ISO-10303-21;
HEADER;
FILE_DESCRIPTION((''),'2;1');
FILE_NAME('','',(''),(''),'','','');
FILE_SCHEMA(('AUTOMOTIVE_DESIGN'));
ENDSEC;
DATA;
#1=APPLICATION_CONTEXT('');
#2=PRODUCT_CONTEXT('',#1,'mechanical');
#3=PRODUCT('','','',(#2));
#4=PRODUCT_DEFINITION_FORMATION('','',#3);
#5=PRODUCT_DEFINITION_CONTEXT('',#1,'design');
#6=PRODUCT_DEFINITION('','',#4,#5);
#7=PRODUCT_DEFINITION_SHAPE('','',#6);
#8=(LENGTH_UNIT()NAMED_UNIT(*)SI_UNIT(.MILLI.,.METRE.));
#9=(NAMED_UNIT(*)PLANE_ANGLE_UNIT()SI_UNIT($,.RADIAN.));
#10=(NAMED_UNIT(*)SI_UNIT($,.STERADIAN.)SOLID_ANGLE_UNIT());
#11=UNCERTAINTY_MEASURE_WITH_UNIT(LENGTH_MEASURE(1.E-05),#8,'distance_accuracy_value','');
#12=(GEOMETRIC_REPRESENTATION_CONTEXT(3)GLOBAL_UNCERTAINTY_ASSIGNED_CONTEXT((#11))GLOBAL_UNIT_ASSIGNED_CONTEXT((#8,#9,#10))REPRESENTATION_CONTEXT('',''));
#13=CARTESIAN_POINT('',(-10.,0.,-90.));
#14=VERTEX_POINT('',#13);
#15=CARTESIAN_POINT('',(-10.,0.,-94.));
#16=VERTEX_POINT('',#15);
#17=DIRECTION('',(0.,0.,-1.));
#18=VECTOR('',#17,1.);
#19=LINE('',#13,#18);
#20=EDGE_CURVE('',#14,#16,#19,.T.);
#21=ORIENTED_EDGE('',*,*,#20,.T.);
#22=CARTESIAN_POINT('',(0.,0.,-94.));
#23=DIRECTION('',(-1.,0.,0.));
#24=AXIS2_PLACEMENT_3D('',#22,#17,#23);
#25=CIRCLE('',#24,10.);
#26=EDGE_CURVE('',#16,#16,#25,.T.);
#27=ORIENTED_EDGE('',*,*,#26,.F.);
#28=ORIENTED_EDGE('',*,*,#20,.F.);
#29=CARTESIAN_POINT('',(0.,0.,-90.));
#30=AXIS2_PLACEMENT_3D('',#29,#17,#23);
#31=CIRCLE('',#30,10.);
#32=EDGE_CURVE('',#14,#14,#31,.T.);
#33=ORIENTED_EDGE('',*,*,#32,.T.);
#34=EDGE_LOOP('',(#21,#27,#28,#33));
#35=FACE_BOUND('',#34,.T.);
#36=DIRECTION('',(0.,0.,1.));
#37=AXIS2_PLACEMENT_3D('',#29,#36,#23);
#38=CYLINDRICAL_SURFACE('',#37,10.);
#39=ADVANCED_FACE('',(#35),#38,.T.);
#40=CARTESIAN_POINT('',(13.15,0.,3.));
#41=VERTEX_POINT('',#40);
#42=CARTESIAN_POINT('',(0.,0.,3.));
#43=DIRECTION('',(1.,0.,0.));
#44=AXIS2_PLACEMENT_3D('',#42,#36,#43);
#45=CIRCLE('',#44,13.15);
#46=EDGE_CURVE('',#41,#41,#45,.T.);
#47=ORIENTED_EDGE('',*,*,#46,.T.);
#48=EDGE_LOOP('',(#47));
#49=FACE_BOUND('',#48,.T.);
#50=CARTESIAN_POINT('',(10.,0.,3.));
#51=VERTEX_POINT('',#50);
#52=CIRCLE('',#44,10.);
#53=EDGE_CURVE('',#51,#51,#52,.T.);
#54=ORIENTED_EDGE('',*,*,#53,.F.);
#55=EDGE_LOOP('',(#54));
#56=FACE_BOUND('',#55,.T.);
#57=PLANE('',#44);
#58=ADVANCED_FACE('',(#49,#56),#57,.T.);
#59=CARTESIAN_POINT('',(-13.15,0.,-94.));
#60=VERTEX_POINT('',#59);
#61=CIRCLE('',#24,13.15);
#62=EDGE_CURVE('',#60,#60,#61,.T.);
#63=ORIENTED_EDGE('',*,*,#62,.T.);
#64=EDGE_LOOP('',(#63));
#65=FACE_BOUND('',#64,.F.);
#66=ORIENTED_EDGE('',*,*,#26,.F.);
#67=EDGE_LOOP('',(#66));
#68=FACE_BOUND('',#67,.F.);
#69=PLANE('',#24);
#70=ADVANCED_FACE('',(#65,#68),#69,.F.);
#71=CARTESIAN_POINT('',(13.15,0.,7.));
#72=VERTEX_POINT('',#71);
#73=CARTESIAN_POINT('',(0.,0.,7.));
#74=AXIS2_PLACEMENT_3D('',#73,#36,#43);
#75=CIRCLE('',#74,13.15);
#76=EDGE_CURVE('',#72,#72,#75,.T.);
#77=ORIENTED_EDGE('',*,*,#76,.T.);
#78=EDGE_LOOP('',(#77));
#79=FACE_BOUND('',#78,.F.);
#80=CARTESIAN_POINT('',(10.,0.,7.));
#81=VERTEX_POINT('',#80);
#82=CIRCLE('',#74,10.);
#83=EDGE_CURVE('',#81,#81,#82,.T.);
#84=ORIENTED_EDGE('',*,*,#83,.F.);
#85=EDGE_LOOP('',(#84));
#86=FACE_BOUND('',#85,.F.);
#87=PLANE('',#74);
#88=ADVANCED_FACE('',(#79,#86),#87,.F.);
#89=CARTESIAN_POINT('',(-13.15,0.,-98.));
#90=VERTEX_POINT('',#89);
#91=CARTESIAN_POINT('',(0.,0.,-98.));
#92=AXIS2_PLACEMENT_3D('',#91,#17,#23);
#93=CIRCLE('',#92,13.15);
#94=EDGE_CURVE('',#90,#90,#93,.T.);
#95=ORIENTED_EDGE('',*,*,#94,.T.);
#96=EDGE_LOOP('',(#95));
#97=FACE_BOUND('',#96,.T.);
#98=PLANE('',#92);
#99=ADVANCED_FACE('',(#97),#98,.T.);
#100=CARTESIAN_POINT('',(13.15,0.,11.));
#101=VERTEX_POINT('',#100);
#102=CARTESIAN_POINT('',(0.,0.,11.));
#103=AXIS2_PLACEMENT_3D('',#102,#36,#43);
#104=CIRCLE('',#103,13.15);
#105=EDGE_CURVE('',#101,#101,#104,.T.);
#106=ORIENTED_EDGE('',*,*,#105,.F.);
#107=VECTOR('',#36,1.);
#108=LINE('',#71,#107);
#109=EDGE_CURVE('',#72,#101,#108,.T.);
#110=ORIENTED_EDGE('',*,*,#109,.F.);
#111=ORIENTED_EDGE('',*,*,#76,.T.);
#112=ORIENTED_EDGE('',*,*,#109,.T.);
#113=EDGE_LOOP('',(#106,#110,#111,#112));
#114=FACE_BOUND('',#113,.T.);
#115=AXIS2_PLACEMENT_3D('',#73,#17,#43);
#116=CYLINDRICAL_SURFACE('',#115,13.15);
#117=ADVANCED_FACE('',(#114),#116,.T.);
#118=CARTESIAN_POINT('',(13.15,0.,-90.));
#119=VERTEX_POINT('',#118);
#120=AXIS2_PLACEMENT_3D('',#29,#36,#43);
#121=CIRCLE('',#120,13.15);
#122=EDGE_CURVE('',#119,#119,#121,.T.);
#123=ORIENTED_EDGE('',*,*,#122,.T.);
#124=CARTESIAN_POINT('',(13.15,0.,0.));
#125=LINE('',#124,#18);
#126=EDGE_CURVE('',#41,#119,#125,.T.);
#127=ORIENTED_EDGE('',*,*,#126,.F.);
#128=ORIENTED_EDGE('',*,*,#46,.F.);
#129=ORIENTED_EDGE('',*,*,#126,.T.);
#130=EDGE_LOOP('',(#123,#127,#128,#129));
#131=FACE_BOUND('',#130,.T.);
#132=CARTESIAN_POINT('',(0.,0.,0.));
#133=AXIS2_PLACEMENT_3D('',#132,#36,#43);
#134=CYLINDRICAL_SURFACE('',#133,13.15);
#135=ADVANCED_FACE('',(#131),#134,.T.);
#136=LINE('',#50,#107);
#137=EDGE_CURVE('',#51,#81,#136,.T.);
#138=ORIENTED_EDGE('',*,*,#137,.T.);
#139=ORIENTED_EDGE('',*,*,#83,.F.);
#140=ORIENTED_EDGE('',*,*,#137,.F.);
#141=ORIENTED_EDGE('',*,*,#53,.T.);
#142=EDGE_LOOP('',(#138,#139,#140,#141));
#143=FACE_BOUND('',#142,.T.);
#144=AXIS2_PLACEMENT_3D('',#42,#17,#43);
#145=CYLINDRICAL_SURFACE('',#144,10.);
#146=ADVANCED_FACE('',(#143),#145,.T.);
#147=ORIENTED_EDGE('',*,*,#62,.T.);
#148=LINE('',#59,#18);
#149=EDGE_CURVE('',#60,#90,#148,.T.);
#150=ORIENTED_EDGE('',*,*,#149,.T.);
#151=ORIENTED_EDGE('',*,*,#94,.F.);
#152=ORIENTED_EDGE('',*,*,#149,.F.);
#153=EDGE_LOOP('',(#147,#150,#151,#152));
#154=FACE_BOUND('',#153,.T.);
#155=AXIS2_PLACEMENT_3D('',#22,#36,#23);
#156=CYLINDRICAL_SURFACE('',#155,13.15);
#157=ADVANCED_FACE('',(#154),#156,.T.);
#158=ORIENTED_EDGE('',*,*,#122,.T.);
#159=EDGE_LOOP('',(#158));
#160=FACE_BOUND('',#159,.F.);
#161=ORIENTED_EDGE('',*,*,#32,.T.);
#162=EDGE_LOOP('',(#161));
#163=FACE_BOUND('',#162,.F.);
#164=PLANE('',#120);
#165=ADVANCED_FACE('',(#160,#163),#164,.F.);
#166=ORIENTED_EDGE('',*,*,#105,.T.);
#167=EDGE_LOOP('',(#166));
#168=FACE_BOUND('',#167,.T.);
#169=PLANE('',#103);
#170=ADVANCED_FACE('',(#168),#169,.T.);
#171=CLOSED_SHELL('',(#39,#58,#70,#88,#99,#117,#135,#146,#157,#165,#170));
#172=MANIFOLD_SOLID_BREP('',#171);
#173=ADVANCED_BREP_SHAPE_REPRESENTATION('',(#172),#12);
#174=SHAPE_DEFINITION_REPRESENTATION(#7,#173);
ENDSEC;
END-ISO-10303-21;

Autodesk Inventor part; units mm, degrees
ref_plane "YZ Plane" through (0, 0, 0) normal (1, 0, 0) x (0, 1, 0)
ref_plane "Work Plane1" through (0, 0, 0) normal (0, 0, 1) x (1, 0, 0)
sketch "Sketch1" plane through (0, 0, 0) normal (0, 0, 1) x (1, 0, 0)
  circle A0 centre (0, -19) radius 4.7
  circle A1 centre (19, 0) radius 4.7
  circle A2 centre (0, 19) radius 4.7
  circle A3 centre (-19, 0) radius 4.7
  circle A4 centre (0, 0) radius 13.5
  circle A5 centre (-13.435, 13.435) radius 4.7
  circle A6 centre (13.435, 13.435) radius 4.7
  circle A7 centre (13.435, -13.435) radius 4.7
  circle A8 centre (-13.435, -13.435) radius 4.7
  circle A9 centre (0, 0) radius 13.15
  point P0 (0, 0)
  dimension "d0" = 0.35
  dimension "d16" = 9.4
  dimension "d17" = 27
  dimension "d18" = 14.542
  dimension "d19" = 14.542
  dimension "d20" = 26.8701
  dimension "d21" = 19
  dimension "d22" = 26.8701
  dimension "d23" = 35.1074
  dimension "d24" = 38
  dimension "d25" = 26.8701
  dimension "d26" = 14.542
  dimension "d27" = 19
  dimension "d28" = 35.1074
  dimension "d29" = 26.8701
  dimension "d30" = 35.1074
  dimension "d31" = 38
  dimension "d32" = 26.8701
ref_plane "Work Plane2" through (-20, -20, -70) normal (0, 0, -1) x (0, 1, 0)
ref_plane "Work Plane3" through (-25, -81.8654, -89) normal (0, 0, -1) x (0, 1, 0)
extrude "Extrusion1" add sketch "Sketch1" against normal blind 90 contours A9
move faces "Move1" translate (0, 0, 3) faces at (-4.0086, 0.988, 0)
sketch "Sketch5" plane through (0, 0, 3) normal (0, 0, 1) x (1, 0, 0)
  circle A0 centre (0, 0) radius 10
  point P0 (0, 0)
  dimension "d11" = 20
extrude "Extrusion4" add sketch "Sketch5" along normal blind 4
sketch "Sketch6" plane through (0, 0, 7) normal (0, 0, 1) x (1, 0, 0)
  circle A0 centre (0, 0) radius 13.15 projected
  point P0 (0, 0)
extrude "Extrusion5" add sketch "Sketch6" along normal blind 4
sketch "Sketch7" plane through (0, 0, -90) normal (0, 0, -1) x (-1, 0, 0)
  circle A0 centre (0, 0) radius 13.15 projected
  circle A1 centre (0, 0) radius 10
  point P0 (0, 0)
  dimension "d35" = 20
extrude "Extrusion6" add sketch "Sketch7" along normal blind 4 contours A1
sketch "Sketch8" plane through (0, 0, -94) normal (0, 0, -1) x (-1, 0, 0)
  circle A0 centre (0, 0) radius 13.15 projected
  point P0 (0, 0)
extrude "Extrusion7" add sketch "Sketch8" along normal blind 4
properties part number "axle-upper_3DPrint"
